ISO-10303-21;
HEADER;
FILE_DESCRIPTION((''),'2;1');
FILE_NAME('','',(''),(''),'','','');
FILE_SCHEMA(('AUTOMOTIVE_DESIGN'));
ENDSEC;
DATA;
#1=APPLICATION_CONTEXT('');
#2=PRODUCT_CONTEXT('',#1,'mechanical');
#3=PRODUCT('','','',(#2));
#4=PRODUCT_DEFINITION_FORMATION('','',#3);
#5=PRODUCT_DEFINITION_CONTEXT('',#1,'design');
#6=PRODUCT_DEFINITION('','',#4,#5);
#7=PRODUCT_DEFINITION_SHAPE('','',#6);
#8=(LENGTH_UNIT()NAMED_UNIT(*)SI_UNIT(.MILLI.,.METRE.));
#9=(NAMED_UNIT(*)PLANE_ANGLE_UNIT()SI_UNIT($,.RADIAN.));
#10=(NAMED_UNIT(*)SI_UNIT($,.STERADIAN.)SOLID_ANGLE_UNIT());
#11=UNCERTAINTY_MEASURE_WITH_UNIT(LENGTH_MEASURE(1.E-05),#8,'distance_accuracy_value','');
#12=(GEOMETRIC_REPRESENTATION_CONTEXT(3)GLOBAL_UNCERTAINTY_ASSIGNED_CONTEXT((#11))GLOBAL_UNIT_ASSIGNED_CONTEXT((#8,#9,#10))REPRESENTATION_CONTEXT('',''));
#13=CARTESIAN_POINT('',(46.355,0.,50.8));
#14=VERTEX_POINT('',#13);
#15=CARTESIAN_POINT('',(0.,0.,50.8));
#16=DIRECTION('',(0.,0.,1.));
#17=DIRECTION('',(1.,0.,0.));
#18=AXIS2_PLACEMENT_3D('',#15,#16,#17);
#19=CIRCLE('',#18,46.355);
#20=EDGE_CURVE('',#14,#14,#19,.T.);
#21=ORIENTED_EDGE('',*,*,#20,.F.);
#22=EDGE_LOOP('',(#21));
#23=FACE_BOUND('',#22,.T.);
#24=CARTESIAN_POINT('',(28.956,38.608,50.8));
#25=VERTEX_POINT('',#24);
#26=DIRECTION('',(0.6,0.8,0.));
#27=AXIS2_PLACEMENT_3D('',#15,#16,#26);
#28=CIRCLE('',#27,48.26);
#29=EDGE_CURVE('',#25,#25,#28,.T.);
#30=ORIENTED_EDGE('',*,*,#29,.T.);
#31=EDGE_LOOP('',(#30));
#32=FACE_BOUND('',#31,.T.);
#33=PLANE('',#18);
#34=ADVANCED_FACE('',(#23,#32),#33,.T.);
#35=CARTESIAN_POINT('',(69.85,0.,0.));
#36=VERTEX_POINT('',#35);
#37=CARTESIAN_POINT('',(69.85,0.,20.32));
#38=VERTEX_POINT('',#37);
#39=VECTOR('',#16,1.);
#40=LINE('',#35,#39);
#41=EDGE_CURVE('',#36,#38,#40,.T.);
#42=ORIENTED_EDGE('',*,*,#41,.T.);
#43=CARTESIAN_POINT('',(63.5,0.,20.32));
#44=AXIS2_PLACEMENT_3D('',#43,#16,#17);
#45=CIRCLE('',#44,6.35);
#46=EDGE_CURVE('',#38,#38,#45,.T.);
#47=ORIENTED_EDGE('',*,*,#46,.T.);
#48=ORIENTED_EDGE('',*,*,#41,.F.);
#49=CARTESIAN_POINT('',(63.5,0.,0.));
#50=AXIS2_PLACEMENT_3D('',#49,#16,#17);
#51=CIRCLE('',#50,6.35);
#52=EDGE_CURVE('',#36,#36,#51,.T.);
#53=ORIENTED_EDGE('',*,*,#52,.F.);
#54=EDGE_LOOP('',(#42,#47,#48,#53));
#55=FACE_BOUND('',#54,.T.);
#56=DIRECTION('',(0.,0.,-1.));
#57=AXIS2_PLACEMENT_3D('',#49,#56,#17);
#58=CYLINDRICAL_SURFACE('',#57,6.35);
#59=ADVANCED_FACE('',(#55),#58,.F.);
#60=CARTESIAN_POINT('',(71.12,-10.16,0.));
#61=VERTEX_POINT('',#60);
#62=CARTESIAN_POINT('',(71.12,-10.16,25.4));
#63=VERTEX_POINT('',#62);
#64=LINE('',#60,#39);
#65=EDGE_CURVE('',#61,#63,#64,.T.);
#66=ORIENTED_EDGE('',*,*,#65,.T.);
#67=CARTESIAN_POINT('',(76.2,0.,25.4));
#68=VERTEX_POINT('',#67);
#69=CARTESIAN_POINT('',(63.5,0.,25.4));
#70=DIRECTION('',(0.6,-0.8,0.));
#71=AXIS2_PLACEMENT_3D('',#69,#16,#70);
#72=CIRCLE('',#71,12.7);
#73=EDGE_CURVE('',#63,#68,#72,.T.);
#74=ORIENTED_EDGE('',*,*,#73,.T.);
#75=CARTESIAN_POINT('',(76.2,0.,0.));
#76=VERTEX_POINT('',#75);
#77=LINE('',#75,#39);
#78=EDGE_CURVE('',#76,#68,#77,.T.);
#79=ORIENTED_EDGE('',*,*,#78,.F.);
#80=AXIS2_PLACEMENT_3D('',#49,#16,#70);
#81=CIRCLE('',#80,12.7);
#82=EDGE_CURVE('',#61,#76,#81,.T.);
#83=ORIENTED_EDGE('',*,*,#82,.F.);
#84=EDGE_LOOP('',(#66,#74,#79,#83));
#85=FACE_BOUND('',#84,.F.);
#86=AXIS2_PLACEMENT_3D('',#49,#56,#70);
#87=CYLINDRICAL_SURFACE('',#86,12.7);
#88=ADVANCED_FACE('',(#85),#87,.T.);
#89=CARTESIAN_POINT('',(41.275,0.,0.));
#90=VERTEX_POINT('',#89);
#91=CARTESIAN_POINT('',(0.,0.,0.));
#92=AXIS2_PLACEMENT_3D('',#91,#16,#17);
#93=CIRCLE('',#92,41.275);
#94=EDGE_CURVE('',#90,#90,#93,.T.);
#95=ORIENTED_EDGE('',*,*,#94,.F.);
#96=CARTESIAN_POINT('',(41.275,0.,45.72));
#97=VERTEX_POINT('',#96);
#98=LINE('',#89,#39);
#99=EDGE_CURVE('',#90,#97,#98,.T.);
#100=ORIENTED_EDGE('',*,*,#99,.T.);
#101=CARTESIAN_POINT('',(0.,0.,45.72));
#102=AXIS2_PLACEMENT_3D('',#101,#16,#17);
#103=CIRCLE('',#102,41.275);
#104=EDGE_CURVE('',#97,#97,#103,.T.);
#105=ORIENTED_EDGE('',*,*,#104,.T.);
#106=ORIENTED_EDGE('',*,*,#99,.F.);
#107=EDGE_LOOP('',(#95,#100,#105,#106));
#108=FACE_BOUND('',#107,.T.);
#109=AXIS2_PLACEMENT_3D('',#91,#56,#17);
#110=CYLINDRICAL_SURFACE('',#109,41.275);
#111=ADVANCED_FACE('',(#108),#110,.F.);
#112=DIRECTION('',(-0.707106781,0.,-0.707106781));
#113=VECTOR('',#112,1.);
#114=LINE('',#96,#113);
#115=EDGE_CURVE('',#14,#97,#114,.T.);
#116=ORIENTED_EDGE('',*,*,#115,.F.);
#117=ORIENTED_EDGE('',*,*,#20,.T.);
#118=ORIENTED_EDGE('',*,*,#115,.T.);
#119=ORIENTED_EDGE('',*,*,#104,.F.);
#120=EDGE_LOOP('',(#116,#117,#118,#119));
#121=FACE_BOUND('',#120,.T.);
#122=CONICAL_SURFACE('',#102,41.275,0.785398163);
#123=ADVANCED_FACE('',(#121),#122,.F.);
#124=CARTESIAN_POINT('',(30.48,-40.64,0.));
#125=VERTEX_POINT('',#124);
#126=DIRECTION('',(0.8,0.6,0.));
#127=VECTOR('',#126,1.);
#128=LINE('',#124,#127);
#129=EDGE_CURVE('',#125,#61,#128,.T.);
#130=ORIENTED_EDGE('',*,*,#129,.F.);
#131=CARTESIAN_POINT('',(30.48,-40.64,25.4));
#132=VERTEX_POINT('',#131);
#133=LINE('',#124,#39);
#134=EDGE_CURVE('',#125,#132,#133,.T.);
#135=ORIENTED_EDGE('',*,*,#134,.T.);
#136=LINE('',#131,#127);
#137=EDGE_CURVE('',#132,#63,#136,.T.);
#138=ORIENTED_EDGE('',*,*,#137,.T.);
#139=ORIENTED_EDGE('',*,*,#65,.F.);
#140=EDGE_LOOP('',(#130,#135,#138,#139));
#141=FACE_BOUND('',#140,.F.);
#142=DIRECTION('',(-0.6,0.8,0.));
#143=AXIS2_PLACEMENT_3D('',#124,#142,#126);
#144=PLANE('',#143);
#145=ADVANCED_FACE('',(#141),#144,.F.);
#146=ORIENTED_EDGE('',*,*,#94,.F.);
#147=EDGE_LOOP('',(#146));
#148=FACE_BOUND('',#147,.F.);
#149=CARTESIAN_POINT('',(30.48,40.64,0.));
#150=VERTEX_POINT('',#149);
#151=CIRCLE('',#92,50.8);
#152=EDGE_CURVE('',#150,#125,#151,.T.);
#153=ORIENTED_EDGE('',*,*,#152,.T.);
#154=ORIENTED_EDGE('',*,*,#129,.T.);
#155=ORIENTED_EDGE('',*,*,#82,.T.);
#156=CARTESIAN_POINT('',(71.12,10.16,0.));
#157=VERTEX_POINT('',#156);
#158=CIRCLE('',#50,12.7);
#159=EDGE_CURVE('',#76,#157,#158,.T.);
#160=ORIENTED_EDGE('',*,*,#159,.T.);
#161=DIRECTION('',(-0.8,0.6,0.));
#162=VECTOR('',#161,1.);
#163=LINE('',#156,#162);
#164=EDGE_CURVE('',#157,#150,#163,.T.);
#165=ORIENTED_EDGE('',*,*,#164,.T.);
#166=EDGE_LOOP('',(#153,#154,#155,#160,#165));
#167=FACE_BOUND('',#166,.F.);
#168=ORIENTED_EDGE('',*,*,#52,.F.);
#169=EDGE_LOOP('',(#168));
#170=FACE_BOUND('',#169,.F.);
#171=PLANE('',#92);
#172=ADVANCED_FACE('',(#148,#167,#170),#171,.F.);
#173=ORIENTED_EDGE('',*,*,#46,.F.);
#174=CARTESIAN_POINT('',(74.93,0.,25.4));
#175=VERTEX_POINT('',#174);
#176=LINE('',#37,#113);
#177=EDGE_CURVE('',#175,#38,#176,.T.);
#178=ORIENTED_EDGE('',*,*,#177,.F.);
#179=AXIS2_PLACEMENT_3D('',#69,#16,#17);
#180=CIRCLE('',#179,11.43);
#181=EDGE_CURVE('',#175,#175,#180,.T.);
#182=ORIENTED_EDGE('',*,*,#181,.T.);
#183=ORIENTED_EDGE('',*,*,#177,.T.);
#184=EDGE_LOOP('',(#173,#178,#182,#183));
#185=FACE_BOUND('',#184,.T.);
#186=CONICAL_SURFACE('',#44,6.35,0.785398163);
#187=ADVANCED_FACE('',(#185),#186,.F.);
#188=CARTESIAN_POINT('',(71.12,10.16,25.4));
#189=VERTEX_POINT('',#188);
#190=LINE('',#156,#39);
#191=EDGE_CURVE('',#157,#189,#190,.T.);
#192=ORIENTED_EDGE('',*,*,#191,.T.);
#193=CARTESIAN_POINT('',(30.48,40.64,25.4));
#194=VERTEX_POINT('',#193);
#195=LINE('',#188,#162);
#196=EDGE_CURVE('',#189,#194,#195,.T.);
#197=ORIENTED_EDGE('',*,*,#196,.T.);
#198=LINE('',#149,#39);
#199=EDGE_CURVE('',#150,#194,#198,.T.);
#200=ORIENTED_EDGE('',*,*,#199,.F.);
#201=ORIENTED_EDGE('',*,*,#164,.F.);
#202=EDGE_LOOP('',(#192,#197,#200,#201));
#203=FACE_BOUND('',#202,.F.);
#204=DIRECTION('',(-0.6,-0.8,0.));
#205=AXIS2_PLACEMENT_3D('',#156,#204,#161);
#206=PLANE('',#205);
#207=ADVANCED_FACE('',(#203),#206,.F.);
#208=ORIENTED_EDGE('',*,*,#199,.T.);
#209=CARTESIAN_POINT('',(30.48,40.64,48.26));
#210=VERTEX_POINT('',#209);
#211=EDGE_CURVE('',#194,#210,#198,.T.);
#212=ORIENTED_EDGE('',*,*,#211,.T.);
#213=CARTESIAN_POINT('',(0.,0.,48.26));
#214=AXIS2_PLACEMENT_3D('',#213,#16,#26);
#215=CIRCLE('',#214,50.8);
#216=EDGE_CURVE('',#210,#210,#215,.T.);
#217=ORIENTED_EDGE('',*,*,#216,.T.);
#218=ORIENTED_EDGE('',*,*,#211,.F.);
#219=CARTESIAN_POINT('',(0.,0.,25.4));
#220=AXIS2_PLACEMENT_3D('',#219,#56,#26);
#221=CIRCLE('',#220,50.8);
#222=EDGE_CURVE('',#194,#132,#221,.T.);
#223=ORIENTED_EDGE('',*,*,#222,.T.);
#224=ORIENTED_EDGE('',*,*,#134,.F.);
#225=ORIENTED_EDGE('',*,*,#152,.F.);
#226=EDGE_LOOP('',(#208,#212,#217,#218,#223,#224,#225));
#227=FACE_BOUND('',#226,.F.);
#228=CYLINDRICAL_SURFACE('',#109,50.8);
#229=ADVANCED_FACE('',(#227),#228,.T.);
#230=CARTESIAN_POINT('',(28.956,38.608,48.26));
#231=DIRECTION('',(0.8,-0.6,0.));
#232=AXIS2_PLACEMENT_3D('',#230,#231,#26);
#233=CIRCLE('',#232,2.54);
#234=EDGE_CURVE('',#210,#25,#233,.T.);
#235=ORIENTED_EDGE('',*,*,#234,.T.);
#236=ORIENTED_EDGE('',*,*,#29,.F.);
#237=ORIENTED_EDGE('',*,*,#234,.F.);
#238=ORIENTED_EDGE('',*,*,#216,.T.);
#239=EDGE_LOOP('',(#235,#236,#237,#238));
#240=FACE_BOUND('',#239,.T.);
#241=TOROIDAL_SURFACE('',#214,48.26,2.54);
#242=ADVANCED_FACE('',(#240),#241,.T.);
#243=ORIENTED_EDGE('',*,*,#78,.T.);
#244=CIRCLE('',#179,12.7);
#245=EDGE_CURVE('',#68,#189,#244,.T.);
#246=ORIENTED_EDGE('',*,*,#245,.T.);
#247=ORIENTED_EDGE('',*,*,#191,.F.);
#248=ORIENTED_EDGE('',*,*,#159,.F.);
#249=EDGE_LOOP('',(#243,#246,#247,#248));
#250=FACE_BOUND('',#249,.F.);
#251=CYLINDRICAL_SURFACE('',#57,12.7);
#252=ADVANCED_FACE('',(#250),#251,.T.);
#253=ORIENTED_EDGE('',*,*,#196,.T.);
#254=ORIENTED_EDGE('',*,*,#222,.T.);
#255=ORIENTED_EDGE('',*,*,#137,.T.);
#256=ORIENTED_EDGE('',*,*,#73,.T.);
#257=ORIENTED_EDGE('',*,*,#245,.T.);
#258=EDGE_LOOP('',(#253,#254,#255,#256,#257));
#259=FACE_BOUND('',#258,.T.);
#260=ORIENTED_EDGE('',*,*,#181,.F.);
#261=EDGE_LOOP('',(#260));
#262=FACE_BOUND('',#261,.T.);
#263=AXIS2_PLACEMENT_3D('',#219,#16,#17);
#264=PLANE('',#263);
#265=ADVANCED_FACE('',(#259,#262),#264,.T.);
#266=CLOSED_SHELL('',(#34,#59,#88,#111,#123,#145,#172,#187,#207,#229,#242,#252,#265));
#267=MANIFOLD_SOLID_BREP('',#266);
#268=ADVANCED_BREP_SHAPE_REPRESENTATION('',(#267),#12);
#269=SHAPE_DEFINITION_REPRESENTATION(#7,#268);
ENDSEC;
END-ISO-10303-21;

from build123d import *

# Parameters (mm, degrees)
F0_R     = 41.275
F0_R_2   = 6.35
F1_DEPTH = 25.4
F2_DEPTH = 50.8
F3_R     = 2.54
F4_SIZE  = 5.08


# Not quite as in the source:
# - a feature names something its author has since deleted; it is built from what else it names


with BuildPart() as f1:
    # F0 (on Top) → F1 (new body)
    with BuildSketch(Plane.XY):
        with BuildLine():
            ThreePointArc((30.48, -40.64), (45.4369013028, -22.7184506514), (50.8, 0))
            ThreePointArc((50.8, 0), (45.4369013028, 22.7184506514), (30.48, 40.64))
            ThreePointArc((30.48, 40.64), (-50.8, 0), (30.48, -40.64))
        make_face()
        Circle(F0_R, mode=Mode.SUBTRACT)
        with BuildLine():
            ThreePointArc((71.12, 10.16), (57.8203873372, 11.3592253257), (50.8, 0))
            ThreePointArc((50.8, 0), (57.8203873372, -11.3592253257), (71.12, -10.16))
            ThreePointArc((71.12, -10.16), (74.8592253257, -5.6796126628), (76.2, 0))
            ThreePointArc((76.2, 0), (74.8592253257, 5.6796126628), (71.12, 10.16))
        make_face()
        with Locations((63.5, 0)):
            Circle(F0_R_2, mode=Mode.SUBTRACT)
        with BuildLine():
            ThreePointArc((71.12, -10.16), (57.8203873372, -11.3592253257), (50.8, 0))
            ThreePointArc((50.8, 0), (45.4369013028, -22.7184506514), (30.48, -40.64))
            Line((30.48, -40.64), (71.12, -10.16))
        make_face()
        with BuildLine():
            ThreePointArc((30.48, 40.64), (45.4369013028, 22.7184506514), (50.8, 0))
            ThreePointArc((50.8, 0), (57.8203873372, 11.3592253257), (71.12, 10.16))
            Line((71.12, 10.16), (30.48, 40.64))
        make_face()
    extrude(amount=F1_DEPTH)

    # F0 (on Top) → F2 (join)
    with BuildSketch(Plane.XY):
        with BuildLine():
            ThreePointArc((30.48, -40.64), (45.4369013028, -22.7184506514), (50.8, 0))
            ThreePointArc((50.8, 0), (45.4369013028, 22.7184506514), (30.48, 40.64))
            ThreePointArc((30.48, 40.64), (-50.8, 0), (30.48, -40.64))
        make_face()
        Circle(F0_R, mode=Mode.SUBTRACT)
    extrude(amount=F2_DEPTH)

    # F3
    f3_edges = [f1.edges().sort_by_distance(p)[0] for p in [
        (-30.48, 40.64, 50.8),
    ]]
    fillet(f3_edges, radius=F3_R)

    # F4
    f4_edges = [f1.edges().sort_by_distance(p)[0] for p in [
        (-41.275, 0, 50.8),
        (57.15, 0, 25.4),
    ]]
    chamfer(f4_edges, length=F4_SIZE)


solid = f1.part
